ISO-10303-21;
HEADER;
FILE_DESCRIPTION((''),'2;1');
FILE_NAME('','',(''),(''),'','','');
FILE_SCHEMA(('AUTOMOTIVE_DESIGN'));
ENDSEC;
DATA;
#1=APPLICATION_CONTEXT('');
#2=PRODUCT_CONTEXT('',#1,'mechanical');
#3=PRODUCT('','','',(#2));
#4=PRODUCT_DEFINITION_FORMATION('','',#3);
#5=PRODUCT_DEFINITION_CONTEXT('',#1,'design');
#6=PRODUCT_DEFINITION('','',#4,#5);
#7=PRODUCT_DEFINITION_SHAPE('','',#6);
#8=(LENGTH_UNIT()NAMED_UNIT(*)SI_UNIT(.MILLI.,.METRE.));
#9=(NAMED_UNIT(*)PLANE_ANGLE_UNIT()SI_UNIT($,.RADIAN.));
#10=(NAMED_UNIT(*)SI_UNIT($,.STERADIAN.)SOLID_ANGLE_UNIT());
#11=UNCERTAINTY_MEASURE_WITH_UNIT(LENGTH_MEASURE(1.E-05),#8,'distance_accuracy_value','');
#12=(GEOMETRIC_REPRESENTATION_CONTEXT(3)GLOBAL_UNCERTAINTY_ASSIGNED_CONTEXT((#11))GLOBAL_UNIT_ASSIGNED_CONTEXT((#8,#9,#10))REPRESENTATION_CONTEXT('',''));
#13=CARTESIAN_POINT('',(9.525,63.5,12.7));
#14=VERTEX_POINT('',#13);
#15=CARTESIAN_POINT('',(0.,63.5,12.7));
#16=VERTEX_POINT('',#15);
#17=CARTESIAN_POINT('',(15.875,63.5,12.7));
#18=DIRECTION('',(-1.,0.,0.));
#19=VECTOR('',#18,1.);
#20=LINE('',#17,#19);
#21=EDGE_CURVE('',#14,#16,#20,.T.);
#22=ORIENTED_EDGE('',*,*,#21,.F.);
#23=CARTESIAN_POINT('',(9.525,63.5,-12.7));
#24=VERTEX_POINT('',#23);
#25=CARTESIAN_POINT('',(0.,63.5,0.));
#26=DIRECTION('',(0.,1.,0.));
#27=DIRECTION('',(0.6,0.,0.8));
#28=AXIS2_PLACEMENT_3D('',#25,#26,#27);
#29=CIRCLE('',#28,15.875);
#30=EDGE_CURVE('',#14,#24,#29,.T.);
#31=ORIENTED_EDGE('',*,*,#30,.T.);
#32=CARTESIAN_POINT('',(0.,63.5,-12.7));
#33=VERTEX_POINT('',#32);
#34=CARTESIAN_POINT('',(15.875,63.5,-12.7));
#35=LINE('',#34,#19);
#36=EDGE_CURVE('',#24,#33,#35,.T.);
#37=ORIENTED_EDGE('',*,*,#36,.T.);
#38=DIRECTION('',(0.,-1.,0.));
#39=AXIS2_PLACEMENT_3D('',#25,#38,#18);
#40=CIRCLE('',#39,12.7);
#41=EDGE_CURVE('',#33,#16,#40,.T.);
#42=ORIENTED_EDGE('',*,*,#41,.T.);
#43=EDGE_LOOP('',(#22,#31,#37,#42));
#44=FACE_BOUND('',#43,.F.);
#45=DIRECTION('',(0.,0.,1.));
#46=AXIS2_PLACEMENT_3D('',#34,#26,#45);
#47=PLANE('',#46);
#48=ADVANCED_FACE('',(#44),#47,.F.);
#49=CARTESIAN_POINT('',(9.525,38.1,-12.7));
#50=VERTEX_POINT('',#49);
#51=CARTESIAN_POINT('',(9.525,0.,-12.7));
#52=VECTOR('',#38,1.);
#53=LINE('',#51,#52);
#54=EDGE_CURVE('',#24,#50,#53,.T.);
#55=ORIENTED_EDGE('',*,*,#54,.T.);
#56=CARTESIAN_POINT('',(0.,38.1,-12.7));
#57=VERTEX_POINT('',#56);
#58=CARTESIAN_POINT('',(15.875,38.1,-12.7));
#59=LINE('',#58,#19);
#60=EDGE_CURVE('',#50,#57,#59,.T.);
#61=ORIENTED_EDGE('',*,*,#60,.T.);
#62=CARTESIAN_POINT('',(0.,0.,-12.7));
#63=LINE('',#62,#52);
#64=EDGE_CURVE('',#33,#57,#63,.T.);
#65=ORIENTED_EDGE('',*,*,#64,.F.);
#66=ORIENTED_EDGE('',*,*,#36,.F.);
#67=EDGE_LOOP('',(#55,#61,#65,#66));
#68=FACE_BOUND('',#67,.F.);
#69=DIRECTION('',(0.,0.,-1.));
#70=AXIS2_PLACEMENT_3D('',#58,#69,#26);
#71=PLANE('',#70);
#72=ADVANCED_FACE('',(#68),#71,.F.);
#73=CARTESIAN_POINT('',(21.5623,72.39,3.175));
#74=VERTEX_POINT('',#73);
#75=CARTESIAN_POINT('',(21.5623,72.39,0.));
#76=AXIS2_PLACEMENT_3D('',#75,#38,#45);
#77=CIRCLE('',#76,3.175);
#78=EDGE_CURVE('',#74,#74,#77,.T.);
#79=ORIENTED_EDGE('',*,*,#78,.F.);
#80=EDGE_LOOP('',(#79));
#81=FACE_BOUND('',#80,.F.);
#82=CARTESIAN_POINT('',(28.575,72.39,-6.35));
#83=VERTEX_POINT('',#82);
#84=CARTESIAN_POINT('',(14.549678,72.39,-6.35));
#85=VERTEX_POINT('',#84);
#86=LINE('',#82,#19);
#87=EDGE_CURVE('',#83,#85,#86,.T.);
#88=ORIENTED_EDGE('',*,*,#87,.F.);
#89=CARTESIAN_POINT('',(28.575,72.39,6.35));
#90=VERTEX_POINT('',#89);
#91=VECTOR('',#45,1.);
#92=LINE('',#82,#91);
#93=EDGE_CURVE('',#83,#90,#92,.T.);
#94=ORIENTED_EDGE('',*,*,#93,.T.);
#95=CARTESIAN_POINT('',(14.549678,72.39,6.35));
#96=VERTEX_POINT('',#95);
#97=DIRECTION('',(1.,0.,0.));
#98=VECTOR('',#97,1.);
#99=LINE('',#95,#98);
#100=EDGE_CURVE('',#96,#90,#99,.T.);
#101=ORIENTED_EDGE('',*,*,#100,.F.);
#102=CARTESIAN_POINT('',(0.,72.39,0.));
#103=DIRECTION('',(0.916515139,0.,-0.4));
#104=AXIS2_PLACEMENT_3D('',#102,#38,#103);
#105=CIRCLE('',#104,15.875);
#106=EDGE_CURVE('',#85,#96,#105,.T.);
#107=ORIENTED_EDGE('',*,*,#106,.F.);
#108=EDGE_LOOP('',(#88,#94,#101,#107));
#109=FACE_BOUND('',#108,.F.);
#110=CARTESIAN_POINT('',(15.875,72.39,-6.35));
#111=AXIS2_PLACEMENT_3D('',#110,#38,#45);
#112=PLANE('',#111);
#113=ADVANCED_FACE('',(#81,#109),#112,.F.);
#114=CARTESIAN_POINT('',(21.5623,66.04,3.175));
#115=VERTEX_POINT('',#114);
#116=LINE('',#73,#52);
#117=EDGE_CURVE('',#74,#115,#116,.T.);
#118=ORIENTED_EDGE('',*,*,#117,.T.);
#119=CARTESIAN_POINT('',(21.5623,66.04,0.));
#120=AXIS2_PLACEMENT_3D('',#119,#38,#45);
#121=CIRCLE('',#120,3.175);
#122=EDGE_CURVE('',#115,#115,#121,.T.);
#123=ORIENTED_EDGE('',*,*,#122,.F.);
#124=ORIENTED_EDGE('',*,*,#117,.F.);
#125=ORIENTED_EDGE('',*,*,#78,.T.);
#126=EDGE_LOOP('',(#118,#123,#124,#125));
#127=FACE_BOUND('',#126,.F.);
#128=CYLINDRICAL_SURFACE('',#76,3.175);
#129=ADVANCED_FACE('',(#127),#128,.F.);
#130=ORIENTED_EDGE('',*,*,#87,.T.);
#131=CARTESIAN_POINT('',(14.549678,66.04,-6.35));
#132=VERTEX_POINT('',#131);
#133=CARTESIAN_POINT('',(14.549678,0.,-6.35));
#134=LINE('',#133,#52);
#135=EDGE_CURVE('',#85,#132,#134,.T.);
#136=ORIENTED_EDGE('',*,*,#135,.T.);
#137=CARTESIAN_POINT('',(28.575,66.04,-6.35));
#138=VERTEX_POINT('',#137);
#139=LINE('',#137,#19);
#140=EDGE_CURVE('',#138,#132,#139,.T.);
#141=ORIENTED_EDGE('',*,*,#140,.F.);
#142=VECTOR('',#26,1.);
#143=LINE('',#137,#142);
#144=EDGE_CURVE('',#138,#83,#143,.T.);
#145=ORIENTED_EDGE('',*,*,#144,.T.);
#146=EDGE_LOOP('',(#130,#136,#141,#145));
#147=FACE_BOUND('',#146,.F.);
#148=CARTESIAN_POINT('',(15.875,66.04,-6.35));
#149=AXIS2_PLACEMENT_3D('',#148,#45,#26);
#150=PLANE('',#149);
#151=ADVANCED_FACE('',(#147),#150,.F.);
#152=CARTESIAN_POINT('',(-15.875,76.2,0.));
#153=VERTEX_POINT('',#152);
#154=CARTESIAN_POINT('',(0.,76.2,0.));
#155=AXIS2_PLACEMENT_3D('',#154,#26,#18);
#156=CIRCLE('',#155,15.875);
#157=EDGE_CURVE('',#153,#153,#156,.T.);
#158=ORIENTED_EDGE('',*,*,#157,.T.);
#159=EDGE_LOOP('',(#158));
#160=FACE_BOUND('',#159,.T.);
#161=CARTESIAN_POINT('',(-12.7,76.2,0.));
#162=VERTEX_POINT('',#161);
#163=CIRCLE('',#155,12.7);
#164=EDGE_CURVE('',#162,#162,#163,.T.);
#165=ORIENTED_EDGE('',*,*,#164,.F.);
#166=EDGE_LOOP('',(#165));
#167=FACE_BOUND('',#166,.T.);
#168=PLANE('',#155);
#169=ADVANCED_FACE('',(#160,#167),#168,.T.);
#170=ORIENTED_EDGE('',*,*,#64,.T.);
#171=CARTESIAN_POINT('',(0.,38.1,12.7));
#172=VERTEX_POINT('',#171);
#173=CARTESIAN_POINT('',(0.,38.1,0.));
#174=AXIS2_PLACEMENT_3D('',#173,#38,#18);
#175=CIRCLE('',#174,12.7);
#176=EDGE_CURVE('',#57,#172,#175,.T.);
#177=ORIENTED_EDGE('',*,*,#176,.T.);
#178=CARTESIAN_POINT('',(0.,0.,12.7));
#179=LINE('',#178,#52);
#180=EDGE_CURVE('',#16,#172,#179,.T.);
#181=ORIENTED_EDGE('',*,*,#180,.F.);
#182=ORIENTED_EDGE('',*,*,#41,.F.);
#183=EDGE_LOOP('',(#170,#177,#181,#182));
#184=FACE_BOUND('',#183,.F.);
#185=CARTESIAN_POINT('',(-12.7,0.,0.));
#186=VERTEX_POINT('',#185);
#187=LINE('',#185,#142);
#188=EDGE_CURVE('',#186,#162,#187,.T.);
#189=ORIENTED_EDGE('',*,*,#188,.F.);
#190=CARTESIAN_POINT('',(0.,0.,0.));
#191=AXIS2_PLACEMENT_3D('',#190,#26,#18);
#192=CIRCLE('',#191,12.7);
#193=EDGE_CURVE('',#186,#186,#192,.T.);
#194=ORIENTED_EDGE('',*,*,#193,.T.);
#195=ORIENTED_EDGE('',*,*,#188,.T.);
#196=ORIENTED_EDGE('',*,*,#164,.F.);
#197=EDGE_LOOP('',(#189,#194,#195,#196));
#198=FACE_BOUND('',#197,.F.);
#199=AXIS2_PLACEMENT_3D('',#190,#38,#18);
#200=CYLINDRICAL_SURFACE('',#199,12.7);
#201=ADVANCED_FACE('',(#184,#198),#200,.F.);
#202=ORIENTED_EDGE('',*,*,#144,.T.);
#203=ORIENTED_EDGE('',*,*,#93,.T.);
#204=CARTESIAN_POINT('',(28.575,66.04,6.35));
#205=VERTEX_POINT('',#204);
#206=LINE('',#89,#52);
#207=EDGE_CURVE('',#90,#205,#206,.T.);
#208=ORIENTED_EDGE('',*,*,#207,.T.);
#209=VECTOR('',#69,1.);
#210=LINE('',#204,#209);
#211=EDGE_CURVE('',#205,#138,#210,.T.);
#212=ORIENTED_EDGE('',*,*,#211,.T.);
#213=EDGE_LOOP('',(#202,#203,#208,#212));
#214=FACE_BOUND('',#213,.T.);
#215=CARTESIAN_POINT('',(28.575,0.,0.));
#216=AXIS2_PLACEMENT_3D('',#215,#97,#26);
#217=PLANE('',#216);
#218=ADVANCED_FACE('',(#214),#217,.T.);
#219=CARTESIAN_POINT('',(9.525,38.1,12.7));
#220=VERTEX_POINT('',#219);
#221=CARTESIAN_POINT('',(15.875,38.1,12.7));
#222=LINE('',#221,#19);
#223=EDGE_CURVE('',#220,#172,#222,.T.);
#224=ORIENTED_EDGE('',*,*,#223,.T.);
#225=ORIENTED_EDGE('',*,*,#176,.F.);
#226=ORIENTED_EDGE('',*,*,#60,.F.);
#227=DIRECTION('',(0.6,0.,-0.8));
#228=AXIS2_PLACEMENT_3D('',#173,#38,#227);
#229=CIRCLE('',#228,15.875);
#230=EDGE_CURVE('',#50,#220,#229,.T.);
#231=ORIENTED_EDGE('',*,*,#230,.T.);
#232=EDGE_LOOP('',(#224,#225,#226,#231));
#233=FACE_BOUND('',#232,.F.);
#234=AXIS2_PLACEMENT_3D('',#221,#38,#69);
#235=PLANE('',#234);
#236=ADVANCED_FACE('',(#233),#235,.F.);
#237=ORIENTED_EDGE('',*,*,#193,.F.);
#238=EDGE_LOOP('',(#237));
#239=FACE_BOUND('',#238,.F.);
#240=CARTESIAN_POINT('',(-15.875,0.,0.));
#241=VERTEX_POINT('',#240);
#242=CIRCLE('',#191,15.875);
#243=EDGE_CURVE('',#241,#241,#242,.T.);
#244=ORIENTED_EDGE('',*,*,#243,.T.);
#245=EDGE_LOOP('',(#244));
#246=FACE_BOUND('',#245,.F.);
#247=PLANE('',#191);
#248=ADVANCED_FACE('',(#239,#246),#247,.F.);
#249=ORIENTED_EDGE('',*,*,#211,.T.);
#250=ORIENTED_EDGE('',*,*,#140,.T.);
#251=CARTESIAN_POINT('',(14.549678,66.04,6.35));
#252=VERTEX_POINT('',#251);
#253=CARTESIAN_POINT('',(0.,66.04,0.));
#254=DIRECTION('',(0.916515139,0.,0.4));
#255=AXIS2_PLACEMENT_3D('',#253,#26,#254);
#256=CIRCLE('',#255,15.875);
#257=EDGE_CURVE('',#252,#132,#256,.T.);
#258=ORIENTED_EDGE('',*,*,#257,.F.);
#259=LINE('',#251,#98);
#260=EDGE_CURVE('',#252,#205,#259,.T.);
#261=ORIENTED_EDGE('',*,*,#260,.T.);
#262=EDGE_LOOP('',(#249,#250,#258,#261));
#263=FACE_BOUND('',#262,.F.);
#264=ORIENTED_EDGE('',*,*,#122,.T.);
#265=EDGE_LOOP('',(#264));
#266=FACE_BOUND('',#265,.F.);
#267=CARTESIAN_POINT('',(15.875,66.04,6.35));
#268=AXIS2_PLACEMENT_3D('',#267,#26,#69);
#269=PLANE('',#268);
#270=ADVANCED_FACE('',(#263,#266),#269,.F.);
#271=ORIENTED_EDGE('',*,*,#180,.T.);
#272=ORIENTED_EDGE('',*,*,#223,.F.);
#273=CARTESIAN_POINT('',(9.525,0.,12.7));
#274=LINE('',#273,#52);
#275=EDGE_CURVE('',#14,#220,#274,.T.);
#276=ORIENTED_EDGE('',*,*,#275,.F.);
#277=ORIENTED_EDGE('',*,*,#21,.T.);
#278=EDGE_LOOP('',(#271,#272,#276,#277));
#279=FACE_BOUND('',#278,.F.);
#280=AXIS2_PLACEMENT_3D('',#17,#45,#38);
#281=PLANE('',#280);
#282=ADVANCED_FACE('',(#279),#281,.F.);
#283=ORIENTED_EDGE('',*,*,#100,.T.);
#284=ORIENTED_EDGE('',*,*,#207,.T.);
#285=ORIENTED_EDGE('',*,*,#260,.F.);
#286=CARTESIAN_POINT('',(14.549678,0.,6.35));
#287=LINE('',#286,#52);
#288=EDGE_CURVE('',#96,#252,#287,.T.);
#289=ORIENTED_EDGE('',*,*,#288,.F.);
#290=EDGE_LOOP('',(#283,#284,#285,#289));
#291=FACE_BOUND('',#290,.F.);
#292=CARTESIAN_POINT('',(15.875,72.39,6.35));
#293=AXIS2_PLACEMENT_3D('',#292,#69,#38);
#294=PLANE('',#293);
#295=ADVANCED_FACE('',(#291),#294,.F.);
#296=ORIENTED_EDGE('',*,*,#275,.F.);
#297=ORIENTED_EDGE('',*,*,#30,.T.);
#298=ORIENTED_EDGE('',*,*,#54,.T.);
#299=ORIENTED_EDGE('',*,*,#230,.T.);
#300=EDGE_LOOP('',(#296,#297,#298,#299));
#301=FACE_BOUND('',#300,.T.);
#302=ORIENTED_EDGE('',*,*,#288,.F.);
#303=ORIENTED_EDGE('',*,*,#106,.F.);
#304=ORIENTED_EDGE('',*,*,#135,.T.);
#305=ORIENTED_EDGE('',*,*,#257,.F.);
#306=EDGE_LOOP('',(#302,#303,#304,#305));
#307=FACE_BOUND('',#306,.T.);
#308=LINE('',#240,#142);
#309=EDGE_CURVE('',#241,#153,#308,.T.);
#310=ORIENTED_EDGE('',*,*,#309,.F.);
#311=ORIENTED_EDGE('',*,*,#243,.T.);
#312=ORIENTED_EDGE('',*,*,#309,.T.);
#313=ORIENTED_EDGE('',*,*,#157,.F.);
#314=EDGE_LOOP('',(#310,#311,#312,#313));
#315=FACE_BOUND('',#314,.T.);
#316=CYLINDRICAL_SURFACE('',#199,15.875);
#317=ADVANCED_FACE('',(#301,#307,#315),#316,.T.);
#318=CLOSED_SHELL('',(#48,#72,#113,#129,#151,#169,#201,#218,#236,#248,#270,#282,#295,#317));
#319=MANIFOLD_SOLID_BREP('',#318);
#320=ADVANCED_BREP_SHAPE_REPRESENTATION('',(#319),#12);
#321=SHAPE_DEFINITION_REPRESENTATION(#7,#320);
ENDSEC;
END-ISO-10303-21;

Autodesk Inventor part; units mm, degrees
ref_plane "XZ Plane" through (0, 0, 0) normal (0, 1, 0) x (-1, 0, 0)
ref_plane "XY Plane" through (0, 0, 0) normal (0, 0, 1) x (1, 0, 0)
sketch "Sketch1" plane through (0, 0, 0) normal (0, 1, 0) x (-1, 0, 0)
  circle A0 centre (0, 0) radius 12.7
  circle A1 centre (0, 0) radius 15.875
  dimension "d0" = 25.4
  dimension "d1" = 3.175
extrude "Extrusion1" add sketch "Sketch1" along normal blind 76.2
ref_plane "Work Plane1" through (15.875, 0, 0) normal (1, 0, 0) x (0, 1, 0)
sketch "Sketch2" plane through (15.875, 0, 0) normal (1, 0, 0) x (0, 1, 0)
  line L0 (63.5, 12.7) -> (38.1, 12.7)
  line L1 (38.1, 12.7) -> (38.1, -12.7)
  line L2 (38.1, -12.7) -> (63.5, -12.7)
  line L3 (63.5, -12.7) -> (63.5, 12.7)
  line L4 (76.2, -15.875) -> (76.2, 15.875) projected
  line L5 (72.39, 6.35) -> (66.04, 6.35)
  line L6 (66.04, 6.35) -> (66.04, -6.35)
  line L7 (66.04, -6.35) -> (72.39, -6.35)
  line L8 (72.39, -6.35) -> (72.39, 6.35)
  point P0 (0, 0)
  point P1 (63.5, 0)
  point P2 (66.04, 0)
  dimension "d4" = 25.4
  dimension "d5" = 25.4
  dimension "d6" = 12.7
  dimension "d7" = 2.54
  dimension "d8" = 6.35
  dimension "d13" = 12.7
extrude "Extrusion2" cut sketch "Sketch2" against normal up to next contours L3 L2 L1 L0
extrude "Extrusion3" add sketch "Sketch2" along normal blind 12.7 contours L8 L7 L6 L5
sketch "Sketch3" plane through (15.875, 72.39, 0) normal (0, 1, 0) x (1, 0, 0)
  point P0 (-15.875, 0)
extrude "Extrusion4" add sketch "Sketch2" against normal up to next contours L8 L7 L6 L5
sketch "Sketch4" plane through (14.5497, 72.39, 6.35) normal (0, 1, 0) x (1, 0, 0)
  line L0 (0, 12.7) -> (14.0253, 12.7) projected
  line L1 (14.0253, 12.7) -> (14.0253, 0) projected
  point P0 (-14.5497, 6.35)
  point P1 (7.0127, 6.35)
  point P2 (7.0127, 12.7)
  point P3 (14.0253, 6.35)
hole "Hole1" at (21.5623, 72.39, 0) direction (0, -1, 0) diameter 6.35 end up to surface
properties part number "MainBody"
